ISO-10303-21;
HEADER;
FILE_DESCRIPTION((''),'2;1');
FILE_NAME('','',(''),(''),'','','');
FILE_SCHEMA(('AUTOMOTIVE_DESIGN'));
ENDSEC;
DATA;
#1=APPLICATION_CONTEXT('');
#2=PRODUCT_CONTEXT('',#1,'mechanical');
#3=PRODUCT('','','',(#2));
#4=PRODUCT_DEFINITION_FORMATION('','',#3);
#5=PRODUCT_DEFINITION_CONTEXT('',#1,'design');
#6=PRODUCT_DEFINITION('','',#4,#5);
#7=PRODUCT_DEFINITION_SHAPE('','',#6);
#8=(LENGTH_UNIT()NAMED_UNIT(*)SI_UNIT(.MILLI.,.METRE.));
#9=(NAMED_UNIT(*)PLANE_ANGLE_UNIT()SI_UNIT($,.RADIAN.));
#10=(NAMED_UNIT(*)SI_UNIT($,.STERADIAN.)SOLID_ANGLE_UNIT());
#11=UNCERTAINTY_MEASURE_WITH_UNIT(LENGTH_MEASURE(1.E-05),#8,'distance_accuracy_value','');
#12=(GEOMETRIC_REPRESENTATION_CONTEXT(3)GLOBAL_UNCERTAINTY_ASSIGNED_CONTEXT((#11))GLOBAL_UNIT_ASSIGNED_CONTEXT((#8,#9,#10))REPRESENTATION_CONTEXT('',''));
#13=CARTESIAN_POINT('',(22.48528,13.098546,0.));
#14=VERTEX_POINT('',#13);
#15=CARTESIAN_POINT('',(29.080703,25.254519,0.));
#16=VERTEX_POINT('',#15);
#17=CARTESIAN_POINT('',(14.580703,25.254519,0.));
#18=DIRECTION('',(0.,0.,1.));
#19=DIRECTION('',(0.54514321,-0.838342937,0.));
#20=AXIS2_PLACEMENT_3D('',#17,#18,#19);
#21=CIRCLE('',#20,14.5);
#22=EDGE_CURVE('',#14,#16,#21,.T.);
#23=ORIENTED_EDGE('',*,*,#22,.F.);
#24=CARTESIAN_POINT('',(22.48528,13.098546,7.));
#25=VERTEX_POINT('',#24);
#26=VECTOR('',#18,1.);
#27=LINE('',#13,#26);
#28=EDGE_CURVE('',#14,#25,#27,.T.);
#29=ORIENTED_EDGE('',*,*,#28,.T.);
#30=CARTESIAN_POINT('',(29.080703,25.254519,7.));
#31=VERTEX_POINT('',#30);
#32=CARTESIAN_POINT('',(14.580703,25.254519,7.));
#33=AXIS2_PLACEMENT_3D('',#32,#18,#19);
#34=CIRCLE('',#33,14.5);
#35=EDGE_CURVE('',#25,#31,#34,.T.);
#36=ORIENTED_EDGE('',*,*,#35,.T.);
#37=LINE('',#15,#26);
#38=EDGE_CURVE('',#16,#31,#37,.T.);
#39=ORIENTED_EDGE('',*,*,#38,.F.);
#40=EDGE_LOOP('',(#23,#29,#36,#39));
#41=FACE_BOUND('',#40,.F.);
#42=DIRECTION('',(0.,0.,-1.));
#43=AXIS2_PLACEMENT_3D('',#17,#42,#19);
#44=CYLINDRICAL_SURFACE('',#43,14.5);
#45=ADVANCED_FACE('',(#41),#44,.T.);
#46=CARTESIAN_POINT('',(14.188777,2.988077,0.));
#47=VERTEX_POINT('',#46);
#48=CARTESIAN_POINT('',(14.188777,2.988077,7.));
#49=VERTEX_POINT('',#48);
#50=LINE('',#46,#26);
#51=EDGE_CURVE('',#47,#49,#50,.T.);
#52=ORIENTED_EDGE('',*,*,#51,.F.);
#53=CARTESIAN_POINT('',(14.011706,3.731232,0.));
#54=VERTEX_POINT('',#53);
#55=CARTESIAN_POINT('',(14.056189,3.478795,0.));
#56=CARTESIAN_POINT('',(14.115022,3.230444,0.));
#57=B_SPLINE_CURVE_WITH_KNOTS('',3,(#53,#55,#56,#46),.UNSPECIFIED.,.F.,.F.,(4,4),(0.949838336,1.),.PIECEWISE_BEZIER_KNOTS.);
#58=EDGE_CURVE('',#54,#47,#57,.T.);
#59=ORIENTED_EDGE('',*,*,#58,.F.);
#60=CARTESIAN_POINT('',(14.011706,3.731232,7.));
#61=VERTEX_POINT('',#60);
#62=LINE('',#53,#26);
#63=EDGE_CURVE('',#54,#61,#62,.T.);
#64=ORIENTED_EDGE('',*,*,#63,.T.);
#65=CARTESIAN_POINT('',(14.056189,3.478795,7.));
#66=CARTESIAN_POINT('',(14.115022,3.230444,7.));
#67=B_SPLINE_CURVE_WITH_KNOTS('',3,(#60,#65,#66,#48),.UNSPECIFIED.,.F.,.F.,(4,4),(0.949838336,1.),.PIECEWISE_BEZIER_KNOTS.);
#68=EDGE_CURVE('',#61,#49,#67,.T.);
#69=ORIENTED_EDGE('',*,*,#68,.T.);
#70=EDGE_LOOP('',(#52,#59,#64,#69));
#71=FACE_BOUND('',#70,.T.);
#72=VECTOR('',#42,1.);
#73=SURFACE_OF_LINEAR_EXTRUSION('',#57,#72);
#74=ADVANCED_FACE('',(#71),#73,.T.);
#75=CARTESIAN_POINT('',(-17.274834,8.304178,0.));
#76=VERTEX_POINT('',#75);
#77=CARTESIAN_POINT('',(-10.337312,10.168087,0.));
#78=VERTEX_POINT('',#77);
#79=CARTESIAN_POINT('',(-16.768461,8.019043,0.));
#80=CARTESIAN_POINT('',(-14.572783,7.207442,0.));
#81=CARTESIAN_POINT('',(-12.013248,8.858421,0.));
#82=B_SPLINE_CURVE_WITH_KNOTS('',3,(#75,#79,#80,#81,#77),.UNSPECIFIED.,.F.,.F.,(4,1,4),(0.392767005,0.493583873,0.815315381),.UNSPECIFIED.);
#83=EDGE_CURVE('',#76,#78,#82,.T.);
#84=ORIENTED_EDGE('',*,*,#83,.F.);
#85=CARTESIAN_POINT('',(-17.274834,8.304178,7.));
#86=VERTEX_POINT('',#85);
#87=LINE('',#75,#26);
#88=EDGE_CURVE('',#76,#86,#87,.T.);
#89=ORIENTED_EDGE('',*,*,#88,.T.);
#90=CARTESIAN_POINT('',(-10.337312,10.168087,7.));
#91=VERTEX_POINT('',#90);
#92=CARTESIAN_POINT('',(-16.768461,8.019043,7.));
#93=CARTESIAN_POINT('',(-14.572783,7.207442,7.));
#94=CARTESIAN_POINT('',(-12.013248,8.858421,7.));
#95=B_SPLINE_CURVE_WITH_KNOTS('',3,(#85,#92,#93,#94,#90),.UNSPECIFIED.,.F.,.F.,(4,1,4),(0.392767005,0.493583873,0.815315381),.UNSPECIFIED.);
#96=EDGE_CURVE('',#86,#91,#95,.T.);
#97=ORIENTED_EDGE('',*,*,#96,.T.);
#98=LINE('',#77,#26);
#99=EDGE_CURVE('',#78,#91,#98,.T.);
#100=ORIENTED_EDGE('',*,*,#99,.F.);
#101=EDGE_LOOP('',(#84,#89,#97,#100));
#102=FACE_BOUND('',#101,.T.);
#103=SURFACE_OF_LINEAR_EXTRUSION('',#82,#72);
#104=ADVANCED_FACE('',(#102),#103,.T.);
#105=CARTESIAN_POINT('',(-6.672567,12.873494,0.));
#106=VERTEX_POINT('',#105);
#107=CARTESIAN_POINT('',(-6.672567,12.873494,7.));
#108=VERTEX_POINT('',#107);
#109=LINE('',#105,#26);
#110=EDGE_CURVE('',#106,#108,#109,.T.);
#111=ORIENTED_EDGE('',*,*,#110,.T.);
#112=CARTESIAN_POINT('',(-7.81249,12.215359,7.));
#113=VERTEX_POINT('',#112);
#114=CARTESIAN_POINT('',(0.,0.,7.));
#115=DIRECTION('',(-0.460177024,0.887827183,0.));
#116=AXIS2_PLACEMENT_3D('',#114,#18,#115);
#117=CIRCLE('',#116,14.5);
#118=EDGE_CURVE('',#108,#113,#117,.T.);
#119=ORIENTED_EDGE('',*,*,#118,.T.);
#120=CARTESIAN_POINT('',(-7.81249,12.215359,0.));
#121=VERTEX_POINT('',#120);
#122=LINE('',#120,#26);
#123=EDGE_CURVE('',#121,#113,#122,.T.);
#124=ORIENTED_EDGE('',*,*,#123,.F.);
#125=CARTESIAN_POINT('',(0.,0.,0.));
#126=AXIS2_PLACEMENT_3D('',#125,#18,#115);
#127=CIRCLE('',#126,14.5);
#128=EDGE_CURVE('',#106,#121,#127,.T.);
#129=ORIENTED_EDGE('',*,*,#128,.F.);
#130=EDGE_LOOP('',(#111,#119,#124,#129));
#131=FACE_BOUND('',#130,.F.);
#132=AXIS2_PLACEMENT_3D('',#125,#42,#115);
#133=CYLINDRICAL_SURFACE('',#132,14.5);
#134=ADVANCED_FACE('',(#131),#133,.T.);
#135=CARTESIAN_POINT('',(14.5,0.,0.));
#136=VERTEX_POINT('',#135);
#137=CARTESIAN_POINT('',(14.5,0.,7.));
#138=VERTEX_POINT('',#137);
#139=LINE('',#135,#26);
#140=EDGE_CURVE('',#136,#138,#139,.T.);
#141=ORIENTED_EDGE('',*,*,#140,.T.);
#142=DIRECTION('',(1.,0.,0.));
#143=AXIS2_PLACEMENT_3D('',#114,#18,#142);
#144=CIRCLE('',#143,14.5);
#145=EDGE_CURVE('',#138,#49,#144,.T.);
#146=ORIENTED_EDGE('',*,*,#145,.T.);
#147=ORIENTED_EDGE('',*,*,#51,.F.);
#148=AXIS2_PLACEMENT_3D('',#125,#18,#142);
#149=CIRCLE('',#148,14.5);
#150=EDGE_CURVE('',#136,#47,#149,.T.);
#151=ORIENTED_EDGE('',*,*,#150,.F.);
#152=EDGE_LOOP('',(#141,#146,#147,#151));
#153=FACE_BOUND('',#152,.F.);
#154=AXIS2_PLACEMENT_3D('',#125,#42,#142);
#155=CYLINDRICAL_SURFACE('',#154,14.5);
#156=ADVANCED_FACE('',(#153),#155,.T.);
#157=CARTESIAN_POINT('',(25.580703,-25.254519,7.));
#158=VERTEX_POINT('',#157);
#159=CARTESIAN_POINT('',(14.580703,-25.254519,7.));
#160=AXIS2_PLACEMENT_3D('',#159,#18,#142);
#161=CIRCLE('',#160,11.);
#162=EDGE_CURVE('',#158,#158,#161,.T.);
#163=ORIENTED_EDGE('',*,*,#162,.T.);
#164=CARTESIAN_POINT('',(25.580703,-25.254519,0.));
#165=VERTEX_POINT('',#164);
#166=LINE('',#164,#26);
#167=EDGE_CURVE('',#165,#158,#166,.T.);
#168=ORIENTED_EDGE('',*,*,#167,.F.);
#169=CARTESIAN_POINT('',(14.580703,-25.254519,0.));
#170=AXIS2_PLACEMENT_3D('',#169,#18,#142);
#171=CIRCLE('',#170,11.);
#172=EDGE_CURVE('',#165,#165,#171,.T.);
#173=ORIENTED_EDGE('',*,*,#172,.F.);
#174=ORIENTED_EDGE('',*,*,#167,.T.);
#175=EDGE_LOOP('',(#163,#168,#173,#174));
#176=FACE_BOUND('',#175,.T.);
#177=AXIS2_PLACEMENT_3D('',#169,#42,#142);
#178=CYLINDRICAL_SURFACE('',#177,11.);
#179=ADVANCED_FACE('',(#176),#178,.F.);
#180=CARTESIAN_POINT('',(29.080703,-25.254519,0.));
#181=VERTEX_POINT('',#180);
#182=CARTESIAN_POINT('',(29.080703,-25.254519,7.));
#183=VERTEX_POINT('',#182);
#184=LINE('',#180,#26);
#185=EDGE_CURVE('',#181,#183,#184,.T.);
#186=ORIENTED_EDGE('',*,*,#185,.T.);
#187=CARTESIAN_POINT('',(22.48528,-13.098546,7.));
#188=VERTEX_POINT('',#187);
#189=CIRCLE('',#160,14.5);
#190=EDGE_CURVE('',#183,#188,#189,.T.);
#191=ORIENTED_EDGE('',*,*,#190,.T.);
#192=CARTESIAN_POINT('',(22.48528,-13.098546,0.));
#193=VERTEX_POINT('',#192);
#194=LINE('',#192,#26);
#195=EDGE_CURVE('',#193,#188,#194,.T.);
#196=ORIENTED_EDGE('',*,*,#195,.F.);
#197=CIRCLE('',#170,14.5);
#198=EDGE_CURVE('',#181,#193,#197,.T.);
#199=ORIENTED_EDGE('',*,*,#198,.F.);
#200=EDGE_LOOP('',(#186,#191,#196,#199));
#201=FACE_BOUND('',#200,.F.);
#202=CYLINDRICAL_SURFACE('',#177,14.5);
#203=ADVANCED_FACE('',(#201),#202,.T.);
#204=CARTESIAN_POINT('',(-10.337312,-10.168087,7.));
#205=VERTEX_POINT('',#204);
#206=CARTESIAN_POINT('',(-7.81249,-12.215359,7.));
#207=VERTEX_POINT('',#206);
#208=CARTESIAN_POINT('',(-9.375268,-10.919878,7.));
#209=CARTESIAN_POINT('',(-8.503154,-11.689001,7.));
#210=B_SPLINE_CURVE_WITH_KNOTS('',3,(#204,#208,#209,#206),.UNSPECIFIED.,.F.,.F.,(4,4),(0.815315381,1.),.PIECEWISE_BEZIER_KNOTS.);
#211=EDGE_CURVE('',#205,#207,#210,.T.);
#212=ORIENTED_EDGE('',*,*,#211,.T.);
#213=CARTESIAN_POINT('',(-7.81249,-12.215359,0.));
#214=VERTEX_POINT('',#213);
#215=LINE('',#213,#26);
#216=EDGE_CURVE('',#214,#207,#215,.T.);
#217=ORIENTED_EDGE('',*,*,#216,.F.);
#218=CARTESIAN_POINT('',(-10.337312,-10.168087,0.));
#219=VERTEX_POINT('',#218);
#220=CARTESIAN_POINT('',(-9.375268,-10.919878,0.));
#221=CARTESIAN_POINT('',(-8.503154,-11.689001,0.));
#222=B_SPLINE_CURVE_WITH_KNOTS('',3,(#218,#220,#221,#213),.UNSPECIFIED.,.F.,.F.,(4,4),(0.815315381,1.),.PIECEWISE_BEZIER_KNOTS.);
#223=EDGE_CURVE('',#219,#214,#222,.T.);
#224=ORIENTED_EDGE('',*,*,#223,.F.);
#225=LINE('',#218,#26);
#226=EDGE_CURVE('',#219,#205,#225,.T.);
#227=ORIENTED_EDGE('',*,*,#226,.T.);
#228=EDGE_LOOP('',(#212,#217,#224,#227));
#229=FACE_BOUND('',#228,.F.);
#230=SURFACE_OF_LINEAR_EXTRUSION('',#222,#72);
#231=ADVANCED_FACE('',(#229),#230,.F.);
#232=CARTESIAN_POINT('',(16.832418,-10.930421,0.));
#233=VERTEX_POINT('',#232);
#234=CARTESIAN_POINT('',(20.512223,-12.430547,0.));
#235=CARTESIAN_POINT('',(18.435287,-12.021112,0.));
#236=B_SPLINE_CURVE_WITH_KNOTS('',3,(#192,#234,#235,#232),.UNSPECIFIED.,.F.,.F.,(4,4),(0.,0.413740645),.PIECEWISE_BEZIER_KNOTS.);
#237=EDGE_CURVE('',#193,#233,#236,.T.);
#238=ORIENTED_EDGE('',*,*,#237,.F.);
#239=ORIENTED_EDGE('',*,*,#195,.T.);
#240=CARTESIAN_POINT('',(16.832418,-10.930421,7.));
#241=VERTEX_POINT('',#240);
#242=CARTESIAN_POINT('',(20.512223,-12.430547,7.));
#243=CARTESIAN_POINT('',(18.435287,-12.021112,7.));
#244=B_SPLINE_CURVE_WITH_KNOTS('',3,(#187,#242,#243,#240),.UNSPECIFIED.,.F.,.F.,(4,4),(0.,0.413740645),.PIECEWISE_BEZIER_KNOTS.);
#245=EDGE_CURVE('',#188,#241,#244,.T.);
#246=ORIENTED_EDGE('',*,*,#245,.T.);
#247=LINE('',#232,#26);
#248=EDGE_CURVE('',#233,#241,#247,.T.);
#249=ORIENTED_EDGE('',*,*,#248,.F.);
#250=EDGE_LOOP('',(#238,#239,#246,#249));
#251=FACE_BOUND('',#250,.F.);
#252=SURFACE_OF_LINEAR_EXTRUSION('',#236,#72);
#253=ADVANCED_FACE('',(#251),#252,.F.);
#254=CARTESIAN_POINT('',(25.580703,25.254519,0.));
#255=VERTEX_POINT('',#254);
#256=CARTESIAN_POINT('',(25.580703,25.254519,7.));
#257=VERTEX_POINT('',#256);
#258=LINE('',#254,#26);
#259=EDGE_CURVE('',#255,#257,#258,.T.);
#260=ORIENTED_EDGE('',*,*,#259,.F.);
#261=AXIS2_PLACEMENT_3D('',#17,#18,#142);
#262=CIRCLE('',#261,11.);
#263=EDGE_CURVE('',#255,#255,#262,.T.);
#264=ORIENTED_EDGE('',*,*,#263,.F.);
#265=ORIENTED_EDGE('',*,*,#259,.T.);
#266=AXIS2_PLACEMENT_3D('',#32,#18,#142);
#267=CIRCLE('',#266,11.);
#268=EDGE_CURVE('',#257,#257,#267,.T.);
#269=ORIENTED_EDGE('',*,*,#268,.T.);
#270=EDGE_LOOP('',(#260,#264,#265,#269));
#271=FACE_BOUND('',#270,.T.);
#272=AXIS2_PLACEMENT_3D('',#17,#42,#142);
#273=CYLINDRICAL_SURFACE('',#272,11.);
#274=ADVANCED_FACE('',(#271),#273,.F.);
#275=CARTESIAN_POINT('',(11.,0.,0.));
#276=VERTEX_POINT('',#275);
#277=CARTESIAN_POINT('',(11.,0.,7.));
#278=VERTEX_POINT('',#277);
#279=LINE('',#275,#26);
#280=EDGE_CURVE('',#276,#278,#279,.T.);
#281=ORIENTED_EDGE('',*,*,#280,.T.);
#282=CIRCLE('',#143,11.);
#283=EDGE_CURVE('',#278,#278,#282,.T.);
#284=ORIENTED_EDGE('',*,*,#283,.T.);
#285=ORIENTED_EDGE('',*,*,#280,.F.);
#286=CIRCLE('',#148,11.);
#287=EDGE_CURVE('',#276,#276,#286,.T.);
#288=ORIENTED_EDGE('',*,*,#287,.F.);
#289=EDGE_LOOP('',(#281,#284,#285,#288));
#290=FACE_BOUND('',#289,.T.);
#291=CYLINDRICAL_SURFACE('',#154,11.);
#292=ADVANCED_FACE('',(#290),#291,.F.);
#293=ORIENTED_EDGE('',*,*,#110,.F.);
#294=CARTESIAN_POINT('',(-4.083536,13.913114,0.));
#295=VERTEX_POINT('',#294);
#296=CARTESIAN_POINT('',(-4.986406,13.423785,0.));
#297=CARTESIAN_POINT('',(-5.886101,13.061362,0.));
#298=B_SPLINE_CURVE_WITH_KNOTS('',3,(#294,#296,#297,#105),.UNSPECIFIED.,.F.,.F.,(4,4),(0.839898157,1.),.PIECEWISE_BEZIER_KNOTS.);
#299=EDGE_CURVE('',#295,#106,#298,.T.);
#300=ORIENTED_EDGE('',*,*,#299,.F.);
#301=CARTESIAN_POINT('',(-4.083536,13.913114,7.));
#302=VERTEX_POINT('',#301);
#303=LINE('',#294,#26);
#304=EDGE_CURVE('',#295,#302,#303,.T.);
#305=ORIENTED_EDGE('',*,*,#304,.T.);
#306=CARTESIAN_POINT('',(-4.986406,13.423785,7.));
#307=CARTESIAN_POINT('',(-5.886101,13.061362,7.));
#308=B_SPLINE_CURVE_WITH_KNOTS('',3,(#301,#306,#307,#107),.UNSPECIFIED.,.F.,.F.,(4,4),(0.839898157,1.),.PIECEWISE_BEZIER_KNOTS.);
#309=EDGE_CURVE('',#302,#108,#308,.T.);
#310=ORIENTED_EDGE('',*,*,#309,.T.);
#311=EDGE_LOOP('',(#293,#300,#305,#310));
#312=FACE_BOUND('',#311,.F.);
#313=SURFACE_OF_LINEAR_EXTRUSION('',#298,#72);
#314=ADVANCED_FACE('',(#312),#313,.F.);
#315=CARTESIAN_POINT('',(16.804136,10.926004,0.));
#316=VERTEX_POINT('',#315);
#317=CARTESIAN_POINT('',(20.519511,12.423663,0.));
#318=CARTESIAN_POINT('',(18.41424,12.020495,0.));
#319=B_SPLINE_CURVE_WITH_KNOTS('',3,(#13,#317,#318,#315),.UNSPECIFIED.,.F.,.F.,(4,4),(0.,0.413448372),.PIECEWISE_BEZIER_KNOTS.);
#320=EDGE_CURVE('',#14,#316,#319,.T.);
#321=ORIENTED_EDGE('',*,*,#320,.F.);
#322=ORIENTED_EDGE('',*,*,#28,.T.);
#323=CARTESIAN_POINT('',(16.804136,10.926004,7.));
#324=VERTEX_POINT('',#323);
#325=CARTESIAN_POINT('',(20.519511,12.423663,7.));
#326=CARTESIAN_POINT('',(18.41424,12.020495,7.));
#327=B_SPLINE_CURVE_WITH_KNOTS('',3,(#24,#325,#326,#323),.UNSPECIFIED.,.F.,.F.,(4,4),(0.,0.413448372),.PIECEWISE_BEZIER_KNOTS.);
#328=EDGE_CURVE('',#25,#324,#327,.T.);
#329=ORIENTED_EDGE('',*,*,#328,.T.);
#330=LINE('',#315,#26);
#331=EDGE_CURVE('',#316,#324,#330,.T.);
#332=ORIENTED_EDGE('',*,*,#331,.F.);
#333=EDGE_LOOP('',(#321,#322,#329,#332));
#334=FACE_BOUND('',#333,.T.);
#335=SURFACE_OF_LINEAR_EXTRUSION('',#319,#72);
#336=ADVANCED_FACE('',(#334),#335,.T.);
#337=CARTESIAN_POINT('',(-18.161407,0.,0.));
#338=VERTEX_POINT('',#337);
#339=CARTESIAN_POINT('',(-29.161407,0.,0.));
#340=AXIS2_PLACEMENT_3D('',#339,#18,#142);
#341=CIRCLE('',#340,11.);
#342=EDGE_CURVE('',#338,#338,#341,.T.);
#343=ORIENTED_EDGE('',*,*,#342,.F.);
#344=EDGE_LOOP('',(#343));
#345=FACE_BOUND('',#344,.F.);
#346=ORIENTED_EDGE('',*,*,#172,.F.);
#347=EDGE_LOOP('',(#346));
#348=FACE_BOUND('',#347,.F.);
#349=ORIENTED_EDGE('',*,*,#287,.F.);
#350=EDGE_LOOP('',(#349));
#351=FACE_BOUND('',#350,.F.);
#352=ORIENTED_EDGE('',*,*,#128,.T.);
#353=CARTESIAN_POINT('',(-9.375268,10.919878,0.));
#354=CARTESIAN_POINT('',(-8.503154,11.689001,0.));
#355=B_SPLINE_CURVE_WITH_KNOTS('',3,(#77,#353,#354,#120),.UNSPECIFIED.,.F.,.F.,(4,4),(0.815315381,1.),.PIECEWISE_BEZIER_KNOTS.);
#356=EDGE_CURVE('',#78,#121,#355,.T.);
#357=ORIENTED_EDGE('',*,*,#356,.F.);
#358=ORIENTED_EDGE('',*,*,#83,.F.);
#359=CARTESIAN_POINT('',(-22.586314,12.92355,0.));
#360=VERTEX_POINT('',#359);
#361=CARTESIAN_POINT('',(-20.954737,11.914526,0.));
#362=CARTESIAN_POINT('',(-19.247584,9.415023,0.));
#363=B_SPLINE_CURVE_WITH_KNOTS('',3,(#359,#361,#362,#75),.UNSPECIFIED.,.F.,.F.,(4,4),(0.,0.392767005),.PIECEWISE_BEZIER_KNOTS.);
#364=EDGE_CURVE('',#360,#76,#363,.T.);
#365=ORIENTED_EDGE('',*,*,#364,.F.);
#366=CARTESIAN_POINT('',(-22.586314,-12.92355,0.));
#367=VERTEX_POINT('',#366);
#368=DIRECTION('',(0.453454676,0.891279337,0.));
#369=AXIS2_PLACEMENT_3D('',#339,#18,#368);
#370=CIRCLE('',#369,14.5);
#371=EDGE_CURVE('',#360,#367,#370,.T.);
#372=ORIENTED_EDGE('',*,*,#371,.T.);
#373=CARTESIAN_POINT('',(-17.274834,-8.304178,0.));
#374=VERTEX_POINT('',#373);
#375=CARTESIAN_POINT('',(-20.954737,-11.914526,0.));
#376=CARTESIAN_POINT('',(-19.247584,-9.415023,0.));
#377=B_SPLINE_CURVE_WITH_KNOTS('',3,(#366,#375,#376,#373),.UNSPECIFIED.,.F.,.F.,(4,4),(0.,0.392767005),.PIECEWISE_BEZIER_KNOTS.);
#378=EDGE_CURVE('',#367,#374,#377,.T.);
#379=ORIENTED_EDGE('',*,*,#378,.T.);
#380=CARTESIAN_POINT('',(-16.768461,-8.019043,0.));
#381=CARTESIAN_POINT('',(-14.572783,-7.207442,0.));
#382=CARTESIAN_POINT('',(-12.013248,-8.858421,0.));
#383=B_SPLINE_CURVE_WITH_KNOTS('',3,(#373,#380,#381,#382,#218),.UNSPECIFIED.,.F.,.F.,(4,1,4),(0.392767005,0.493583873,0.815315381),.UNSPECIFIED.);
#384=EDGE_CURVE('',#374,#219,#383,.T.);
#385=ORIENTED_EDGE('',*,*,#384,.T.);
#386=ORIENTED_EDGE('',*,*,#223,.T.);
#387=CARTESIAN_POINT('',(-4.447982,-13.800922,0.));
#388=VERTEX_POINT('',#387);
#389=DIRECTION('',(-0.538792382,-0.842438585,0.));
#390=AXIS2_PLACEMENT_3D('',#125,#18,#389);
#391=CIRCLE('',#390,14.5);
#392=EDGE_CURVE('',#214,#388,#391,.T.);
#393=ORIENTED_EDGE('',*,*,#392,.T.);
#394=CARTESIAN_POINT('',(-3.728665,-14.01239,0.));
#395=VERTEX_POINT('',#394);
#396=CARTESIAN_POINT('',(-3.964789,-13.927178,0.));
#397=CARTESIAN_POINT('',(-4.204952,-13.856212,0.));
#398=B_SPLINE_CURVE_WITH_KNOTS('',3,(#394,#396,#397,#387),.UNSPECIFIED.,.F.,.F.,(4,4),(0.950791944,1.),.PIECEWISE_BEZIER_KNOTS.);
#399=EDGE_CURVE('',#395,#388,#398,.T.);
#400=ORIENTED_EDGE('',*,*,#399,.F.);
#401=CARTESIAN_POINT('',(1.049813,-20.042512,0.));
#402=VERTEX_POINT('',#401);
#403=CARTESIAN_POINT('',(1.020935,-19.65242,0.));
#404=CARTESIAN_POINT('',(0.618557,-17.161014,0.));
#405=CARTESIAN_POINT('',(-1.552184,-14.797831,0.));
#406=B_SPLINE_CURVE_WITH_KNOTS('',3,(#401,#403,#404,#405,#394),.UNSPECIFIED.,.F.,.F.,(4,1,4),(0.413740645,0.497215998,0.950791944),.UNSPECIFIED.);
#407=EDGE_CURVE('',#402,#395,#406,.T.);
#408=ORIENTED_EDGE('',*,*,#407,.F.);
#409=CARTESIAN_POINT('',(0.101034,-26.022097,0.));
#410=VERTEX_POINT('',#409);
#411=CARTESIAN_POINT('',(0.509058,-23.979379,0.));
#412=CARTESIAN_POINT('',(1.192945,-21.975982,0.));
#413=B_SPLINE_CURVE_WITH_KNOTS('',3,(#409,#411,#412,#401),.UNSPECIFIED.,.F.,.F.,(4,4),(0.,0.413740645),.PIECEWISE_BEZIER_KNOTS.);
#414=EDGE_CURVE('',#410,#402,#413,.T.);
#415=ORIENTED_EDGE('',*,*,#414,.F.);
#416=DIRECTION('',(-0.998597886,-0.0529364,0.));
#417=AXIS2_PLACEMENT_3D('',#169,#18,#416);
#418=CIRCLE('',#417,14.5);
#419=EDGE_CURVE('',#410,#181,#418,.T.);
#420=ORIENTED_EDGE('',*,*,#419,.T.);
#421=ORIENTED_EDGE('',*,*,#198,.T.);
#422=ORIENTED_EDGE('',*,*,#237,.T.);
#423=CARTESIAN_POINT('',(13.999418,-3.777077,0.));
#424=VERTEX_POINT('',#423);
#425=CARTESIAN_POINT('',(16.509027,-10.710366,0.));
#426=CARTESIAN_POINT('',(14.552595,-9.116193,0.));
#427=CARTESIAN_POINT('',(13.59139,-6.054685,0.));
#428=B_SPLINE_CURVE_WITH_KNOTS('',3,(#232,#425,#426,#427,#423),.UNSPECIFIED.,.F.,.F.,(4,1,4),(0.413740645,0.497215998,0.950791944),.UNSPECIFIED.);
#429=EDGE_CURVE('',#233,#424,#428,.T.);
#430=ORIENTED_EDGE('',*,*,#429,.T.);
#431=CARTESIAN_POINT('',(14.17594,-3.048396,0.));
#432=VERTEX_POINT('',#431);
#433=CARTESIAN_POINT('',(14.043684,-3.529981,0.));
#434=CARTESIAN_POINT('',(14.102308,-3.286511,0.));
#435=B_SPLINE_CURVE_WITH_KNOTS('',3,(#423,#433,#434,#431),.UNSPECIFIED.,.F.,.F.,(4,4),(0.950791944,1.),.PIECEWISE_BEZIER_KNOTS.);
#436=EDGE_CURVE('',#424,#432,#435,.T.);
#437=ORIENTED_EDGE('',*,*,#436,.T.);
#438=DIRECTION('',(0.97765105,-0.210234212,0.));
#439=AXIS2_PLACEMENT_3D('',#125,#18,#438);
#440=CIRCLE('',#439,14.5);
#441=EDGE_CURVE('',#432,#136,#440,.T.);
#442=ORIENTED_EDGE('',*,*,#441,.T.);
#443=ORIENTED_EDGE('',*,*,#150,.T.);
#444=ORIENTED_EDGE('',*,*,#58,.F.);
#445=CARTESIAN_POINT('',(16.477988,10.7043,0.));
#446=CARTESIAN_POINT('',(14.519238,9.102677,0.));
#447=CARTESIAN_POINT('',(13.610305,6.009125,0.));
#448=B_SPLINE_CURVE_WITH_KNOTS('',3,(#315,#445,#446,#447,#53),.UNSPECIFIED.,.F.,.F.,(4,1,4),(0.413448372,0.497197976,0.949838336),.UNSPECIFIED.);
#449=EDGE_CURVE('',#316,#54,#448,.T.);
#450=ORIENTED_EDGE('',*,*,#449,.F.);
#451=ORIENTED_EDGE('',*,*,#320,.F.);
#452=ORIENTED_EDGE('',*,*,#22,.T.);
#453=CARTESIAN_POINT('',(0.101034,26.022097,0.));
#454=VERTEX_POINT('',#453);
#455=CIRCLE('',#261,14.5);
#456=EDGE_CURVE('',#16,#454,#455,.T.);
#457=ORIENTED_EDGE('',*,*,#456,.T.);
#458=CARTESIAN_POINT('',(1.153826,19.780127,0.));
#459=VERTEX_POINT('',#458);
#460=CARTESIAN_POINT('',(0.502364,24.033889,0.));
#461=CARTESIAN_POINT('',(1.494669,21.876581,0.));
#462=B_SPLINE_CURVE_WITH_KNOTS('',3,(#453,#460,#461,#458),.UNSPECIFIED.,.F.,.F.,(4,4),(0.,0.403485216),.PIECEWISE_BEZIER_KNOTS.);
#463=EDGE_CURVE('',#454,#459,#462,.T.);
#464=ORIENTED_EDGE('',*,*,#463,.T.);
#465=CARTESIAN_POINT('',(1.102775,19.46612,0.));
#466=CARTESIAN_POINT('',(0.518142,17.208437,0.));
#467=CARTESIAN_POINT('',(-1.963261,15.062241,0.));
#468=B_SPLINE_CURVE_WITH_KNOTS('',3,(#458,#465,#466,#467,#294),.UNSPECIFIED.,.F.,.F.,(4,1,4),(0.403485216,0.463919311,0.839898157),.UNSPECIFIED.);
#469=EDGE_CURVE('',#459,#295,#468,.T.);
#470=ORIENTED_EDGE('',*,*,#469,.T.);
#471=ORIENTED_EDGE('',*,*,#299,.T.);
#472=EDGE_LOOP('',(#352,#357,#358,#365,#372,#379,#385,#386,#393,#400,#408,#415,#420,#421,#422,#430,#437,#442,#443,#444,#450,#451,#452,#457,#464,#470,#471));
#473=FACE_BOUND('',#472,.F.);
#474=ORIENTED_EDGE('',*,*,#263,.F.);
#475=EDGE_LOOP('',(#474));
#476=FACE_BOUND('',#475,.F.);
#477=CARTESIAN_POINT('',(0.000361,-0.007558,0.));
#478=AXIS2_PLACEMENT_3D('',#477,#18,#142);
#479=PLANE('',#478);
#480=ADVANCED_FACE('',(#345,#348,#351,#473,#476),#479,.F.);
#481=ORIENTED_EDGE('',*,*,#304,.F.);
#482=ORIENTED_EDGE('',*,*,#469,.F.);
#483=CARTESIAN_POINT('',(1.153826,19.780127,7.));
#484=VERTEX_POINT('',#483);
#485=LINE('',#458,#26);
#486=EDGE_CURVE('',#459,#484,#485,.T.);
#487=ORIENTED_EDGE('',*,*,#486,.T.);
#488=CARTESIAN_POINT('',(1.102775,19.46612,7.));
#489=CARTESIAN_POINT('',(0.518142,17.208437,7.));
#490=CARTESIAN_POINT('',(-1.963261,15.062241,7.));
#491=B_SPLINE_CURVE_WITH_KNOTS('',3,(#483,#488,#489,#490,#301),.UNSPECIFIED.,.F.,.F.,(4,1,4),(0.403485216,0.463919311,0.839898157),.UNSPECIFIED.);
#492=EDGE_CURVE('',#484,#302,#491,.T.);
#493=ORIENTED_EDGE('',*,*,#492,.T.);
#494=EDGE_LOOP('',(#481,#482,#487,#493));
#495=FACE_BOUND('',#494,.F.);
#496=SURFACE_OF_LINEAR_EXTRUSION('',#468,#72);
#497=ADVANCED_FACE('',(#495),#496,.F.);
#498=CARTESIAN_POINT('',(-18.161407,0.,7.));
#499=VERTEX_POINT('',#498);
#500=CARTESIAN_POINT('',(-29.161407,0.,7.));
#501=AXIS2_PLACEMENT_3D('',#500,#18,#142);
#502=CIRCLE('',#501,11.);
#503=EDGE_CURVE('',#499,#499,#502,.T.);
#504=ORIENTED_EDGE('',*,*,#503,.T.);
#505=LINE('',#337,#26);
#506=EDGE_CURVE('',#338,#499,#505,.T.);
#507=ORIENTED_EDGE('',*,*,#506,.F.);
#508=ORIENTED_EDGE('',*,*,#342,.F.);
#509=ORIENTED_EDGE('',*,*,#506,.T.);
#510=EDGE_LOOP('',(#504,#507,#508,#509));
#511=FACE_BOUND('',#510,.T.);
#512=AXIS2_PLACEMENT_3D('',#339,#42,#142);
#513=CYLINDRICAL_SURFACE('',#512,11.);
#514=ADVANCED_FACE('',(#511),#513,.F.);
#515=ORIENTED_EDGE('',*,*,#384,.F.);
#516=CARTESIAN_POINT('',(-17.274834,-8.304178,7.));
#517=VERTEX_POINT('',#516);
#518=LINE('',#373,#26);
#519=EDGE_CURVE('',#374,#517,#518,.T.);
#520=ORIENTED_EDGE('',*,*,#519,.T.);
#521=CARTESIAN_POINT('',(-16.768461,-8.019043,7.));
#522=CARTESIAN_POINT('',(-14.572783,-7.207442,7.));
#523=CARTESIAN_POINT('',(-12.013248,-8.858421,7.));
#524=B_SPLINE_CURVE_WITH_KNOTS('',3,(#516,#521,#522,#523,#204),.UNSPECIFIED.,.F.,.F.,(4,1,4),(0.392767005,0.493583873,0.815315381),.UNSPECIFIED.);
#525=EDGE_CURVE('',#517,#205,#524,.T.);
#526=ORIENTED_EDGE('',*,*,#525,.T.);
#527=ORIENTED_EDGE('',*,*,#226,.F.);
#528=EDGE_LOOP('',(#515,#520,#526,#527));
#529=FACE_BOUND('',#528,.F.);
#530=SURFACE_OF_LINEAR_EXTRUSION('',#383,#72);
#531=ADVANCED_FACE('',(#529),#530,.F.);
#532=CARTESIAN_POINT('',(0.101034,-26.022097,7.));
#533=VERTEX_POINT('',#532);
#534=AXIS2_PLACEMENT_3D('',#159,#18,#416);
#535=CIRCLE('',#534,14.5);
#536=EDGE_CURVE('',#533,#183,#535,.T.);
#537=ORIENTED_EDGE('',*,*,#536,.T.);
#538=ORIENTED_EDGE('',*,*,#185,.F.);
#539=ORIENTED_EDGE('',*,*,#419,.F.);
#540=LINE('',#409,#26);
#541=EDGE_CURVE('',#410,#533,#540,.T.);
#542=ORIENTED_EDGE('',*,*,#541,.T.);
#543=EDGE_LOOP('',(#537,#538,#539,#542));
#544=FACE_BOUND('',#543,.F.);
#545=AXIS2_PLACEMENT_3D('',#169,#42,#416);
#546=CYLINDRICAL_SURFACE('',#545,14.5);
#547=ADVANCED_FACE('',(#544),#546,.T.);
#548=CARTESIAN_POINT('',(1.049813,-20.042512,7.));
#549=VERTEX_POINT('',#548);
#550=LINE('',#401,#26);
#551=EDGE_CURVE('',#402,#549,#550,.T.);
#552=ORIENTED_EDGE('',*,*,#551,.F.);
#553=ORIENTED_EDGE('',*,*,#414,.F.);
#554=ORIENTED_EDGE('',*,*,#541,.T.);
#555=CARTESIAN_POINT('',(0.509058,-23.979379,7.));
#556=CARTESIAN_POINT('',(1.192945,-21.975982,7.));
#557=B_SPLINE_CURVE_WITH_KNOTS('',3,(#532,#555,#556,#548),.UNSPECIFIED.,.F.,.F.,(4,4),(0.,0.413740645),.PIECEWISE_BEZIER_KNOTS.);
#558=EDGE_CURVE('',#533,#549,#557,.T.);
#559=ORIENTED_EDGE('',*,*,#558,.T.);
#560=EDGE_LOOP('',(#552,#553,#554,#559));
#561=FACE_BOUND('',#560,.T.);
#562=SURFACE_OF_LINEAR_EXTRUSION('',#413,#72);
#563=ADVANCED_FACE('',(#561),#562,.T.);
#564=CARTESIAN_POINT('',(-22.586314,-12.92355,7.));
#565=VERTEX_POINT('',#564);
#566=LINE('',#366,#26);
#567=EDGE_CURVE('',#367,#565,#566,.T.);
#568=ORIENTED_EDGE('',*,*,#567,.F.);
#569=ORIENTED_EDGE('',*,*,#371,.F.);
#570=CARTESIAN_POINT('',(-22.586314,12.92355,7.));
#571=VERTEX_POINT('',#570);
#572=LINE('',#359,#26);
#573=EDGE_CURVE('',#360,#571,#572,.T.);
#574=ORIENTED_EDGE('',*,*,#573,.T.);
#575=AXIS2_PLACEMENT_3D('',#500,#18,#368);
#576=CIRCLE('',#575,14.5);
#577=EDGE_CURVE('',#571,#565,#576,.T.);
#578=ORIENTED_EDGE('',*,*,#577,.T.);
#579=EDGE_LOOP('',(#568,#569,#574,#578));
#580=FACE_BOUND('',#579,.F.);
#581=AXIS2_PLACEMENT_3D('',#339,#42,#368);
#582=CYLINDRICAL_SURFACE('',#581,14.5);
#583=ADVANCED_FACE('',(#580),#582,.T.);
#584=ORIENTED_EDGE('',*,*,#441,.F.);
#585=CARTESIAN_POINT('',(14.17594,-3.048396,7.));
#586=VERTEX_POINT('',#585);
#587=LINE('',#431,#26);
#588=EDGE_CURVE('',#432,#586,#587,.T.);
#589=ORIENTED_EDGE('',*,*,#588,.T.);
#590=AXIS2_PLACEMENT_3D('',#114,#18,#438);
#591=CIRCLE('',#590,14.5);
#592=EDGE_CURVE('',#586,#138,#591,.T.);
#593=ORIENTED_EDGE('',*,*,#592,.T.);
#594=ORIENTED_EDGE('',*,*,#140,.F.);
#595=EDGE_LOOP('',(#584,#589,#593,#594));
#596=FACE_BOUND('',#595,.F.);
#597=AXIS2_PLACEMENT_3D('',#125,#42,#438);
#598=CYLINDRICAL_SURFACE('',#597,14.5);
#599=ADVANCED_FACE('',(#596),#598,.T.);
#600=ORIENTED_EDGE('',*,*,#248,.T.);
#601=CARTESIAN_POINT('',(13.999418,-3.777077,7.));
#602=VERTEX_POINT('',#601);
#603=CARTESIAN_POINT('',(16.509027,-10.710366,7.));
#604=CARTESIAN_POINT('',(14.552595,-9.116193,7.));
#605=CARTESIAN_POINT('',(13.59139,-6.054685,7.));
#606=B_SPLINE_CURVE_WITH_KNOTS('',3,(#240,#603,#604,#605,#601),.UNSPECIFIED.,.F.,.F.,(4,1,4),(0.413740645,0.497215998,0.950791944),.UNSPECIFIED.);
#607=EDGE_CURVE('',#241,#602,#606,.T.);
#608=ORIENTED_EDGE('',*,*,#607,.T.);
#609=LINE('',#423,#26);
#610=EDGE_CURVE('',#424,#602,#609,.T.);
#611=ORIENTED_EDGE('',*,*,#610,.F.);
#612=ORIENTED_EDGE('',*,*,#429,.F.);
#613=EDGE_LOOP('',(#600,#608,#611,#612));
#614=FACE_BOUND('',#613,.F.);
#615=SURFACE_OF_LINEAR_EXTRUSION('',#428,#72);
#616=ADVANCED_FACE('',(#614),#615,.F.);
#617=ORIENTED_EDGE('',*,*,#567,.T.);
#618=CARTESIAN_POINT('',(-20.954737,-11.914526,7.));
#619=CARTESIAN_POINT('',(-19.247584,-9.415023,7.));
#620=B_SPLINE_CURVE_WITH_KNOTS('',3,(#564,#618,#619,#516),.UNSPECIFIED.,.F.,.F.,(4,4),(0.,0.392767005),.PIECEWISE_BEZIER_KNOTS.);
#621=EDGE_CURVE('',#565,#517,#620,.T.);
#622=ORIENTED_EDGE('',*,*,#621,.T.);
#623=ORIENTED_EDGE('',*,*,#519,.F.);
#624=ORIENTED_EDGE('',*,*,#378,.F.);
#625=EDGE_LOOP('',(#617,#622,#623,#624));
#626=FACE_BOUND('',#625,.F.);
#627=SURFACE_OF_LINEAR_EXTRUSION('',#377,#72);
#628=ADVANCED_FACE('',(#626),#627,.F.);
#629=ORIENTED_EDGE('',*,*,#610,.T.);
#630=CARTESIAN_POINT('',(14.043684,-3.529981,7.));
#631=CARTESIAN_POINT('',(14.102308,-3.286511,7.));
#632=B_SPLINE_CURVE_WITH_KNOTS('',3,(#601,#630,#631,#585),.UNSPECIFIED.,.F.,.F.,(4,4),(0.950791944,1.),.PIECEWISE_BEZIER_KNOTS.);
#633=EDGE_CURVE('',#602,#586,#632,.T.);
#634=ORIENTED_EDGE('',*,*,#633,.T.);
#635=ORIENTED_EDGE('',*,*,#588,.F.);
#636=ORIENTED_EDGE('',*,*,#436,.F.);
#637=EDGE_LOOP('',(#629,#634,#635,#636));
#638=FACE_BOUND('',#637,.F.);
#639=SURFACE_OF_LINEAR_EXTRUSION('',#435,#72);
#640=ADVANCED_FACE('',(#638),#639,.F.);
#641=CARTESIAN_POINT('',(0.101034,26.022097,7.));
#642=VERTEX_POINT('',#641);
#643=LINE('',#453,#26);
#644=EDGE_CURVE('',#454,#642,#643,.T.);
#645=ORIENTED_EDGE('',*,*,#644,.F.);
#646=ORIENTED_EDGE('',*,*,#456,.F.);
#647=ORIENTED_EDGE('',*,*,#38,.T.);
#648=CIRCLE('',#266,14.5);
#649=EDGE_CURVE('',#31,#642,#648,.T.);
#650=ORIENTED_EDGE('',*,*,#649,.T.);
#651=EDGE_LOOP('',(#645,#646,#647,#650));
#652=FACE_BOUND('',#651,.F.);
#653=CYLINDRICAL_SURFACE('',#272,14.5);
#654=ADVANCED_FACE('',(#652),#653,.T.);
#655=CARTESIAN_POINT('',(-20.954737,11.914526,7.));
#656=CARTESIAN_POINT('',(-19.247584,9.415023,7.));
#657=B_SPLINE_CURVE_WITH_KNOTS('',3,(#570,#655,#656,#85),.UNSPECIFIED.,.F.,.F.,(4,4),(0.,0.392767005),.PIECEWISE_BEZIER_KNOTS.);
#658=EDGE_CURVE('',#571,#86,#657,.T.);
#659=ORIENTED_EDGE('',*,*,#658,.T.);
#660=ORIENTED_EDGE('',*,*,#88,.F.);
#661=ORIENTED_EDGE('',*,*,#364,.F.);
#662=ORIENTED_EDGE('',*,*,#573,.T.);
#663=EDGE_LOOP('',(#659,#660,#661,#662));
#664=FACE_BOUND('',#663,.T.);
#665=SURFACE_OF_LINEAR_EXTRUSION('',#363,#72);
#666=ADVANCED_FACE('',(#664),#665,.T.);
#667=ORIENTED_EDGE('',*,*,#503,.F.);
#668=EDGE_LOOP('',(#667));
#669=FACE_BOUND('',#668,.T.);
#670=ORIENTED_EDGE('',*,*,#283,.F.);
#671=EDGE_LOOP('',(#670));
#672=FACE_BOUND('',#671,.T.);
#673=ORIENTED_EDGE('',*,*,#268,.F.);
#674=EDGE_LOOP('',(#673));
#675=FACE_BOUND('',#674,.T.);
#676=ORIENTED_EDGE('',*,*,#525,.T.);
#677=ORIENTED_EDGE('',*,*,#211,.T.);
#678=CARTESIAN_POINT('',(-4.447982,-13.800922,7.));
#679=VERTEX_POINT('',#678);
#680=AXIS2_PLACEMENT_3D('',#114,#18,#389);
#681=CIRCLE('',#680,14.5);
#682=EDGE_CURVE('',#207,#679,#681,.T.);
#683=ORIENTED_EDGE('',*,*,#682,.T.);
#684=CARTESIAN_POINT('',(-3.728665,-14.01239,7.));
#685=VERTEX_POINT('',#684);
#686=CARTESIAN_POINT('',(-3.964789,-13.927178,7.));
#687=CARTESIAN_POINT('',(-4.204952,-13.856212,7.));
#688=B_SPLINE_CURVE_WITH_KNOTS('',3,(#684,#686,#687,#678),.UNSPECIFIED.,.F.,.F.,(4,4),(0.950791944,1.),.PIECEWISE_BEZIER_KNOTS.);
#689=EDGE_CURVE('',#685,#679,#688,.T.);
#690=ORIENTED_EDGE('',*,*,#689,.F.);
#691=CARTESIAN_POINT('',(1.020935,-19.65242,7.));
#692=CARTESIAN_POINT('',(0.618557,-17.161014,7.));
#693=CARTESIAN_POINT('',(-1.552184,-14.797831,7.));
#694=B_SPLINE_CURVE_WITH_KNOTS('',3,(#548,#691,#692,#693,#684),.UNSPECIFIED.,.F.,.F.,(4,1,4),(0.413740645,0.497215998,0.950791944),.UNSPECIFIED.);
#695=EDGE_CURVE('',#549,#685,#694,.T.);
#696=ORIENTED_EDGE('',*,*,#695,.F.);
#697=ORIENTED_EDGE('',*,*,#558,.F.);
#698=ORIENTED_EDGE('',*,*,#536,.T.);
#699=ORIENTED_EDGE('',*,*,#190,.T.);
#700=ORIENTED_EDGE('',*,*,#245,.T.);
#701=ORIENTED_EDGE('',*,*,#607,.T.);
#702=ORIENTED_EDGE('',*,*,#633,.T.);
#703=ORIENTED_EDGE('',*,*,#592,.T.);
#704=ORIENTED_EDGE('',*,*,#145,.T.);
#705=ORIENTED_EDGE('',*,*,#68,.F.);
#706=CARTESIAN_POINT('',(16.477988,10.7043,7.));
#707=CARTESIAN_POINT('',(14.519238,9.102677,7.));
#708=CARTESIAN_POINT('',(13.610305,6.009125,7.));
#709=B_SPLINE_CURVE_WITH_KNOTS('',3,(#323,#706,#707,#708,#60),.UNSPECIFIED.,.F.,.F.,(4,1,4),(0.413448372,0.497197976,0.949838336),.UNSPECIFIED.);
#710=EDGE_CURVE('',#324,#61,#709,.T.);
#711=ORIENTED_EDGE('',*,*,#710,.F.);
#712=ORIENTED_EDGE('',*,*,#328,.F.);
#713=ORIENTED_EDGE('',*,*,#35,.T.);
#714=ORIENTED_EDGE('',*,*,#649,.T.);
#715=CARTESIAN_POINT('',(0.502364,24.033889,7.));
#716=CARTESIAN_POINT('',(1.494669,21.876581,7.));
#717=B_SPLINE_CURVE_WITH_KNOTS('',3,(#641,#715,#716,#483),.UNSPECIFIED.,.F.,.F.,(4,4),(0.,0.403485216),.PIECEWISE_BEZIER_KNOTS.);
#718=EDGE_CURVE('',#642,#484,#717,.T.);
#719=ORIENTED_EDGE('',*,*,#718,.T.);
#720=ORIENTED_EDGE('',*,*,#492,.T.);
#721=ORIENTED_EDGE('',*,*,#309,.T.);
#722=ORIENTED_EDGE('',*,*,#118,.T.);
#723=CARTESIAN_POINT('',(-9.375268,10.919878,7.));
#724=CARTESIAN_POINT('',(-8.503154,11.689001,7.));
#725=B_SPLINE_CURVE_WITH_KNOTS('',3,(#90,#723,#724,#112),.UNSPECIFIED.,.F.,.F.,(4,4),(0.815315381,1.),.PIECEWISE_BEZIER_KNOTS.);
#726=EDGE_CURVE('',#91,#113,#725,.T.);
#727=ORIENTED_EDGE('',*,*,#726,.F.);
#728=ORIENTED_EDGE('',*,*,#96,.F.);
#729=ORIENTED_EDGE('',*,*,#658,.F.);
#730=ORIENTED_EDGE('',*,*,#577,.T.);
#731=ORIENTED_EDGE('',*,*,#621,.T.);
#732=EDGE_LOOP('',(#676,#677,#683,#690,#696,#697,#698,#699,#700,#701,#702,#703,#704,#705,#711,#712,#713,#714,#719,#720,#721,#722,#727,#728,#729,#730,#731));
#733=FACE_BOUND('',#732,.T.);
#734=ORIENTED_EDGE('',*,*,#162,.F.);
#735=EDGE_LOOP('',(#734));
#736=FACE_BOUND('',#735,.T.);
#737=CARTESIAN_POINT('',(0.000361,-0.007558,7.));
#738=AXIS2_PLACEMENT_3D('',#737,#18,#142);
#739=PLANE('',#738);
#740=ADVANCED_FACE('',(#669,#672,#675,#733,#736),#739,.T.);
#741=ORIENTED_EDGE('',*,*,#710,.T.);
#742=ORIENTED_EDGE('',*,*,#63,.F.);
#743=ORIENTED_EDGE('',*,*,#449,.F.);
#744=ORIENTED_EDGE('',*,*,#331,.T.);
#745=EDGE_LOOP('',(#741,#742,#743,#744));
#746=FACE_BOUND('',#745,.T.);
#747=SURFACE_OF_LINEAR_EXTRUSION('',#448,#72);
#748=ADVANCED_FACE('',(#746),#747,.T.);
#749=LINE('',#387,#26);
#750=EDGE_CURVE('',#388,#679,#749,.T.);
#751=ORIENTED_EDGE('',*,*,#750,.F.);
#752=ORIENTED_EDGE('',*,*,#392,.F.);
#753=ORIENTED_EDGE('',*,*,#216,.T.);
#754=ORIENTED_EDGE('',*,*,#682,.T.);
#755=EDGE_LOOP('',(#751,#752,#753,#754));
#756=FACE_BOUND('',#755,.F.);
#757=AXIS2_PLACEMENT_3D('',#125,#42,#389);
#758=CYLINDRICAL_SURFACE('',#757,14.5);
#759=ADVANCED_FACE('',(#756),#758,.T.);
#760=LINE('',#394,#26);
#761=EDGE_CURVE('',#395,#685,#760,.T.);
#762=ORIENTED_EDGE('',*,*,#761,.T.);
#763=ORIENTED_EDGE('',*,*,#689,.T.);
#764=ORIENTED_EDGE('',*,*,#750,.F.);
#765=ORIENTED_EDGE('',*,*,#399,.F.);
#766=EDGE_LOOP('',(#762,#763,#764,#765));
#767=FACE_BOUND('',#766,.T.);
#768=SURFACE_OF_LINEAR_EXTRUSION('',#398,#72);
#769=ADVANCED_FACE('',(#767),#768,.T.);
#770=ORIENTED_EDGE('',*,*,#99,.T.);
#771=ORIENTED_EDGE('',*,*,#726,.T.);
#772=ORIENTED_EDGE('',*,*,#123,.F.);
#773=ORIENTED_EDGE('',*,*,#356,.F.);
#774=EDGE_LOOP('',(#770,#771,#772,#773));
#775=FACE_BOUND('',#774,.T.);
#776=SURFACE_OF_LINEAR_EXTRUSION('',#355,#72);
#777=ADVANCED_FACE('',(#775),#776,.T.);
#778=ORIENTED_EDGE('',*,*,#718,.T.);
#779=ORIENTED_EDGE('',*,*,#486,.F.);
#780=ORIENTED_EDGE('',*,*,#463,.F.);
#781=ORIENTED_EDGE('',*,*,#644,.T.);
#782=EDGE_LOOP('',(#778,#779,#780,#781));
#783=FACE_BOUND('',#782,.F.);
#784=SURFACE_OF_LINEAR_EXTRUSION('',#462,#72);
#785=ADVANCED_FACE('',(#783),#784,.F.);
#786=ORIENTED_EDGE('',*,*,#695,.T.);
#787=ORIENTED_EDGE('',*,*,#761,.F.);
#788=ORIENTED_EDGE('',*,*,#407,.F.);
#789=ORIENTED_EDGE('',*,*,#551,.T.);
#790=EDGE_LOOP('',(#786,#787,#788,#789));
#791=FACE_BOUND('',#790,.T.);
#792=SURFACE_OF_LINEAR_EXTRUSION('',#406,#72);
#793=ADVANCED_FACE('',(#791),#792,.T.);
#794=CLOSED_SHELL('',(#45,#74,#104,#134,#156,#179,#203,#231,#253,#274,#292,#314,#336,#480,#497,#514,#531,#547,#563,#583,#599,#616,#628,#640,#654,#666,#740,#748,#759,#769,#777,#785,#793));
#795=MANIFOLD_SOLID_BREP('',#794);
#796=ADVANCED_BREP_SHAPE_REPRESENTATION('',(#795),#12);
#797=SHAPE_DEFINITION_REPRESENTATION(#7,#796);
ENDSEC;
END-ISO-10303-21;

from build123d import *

# Parameters (mm, degrees)
F0_R     = 11
F1_DEPTH = 7


with BuildPart() as f1:
    # F0 (on Top) → F1 (new body)
    with BuildSketch(Plane.XY):
        with BuildLine():
            ThreePointArc((14.1759402298, -3.0483960701), (14.4187574592, -1.5327861344), (14.5, 0))
            ThreePointArc((14.5, 0), (14.421984404, 1.5021204517), (14.188777124, 2.9880769278))
            add(Edge.make_bspline(
                [(14.0117061641, 3.7312317498), (14.0561894605, 3.4787953407), (14.1150221965, 3.2304441785), (14.188777124, 2.9880769278)],
                knots=[0.9498383363, 0.9498383363, 0.9498383363, 0.9498383363, 1, 1, 1, 1], degree=3))
            ThreePointArc((14.0117061641, 3.7312317498), (7.1105429941, 12.6368579295), (-4.0835358776, 13.9131137685))
            add(Edge.make_bspline(
                [(-4.0835358776, 13.9131137685), (-4.9864056262, 13.4237848609), (-5.8861011392, 13.0613615019), (-6.6725668518, 12.8734941492)],
                knots=[0.8398981571, 0.8398981571, 0.8398981571, 0.8398981571, 1, 1, 1, 1], degree=3))
            ThreePointArc((-6.6725668518, 12.8734941492), (-7.25, 12.5573683549), (-7.8124895427, 12.2153594767))
            add(Edge.make_bspline(
                [(-10.3373118209, 10.1680865613), (-9.3752684105, 10.9198780403), (-8.503153556, 11.689001034), (-7.8124895427, 12.2153594767)],
                knots=[0.8153153807, 0.8153153807, 0.8153153807, 0.8153153807, 1, 1, 1, 1], degree=3))
            ThreePointArc((-10.3373118209, 10.1680865613), (-14.5, 0), (-10.3373118209, -10.1680865613))
            add(Edge.make_bspline(
                [(-10.3373118209, -10.1680865613), (-9.3752684105, -10.9198780403), (-8.503153556, -11.689001034), (-7.8124895427, -12.2153594767)],
                knots=[0.8153153807, 0.8153153807, 0.8153153807, 0.8153153807, 1, 1, 1, 1], degree=3))
            ThreePointArc((-7.8124895427, -12.2153594767), (-6.1812855522, -13.1164670899), (-4.4479816774, -13.8009223966))
            add(Edge.make_bspline(
                [(-3.7286645674, -14.0123895373), (-3.9647890084, -13.9271776533), (-4.2049522049, -13.8562123362), (-4.4479816774, -13.8009223966)],
                knots=[0.9507919436, 0.9507919436, 0.9507919436, 0.9507919436, 1, 1, 1, 1], degree=3))
            ThreePointArc((-3.7286645674, -14.0123895373), (7.25, -12.5573683549), (13.9994175907, -3.7770765311))
            add(Edge.make_bspline(
                [(13.9994175907, -3.7770765311), (14.043684155, -3.5299808247), (14.1023079859, -3.2865107369), (14.1759402298, -3.0483960701)],
                knots=[0.9507919436, 0.9507919436, 0.9507919436, 0.9507919436, 1, 1, 1, 1], degree=3))
        make_face()
        Circle(F0_R, mode=Mode.SUBTRACT)
        with BuildLine():
            ThreePointArc((-4.0835358776, 13.9131137685), (7.1105429941, 12.6368579295), (14.0117061641, 3.7312317498))
            add(Edge.make_bspline(
                [(16.8041360144, 10.9260038108), (16.4779875659, 10.7042997166), (14.5192375285, 9.1026767142), (13.6103052967, 6.0091248438), (14.0117061641, 3.7312317498)],
                knots=[0.4134483725, 0.4134483725, 0.4134483725, 0.4134483725, 0.4971979755, 0.9498383363, 0.9498383363, 0.9498383363, 0.9498383363], degree=3))
            ThreePointArc((16.8041360144, 10.9260038108), (7.4408037917, 12.6342244362), (1.1538261794, 19.7801267949))
            add(Edge.make_bspline(
                [(1.1538261794, 19.7801267949), (1.1027747103, 19.4661195397), (0.518142053, 17.2084365704), (-1.9632609294, 15.0622405677), (-4.0835358776, 13.9131137685)],
                knots=[0.4034852163, 0.4034852163, 0.4034852163, 0.4034852163, 0.4639193106, 0.8398981571, 0.8398981571, 0.8398981571, 0.8398981571], degree=3))
        make_face()
        with BuildLine():
            add(Edge.make_bspline(
                [(16.8324180589, -10.9304210804), (16.5090270331, -10.7103658028), (14.5525951809, -9.1161932679), (13.5913899182, -6.0546846446), (13.9994175907, -3.7770765311)],
                knots=[0.4137406454, 0.4137406454, 0.4137406454, 0.4137406454, 0.4972159985, 0.9507919436, 0.9507919436, 0.9507919436, 0.9507919436], degree=3))
            ThreePointArc((13.9994175907, -3.7770765311), (7.25, -12.5573683549), (-3.7286645674, -14.0123895373))
            add(Edge.make_bspline(
                [(1.0498133002, -20.0425121863), (1.0209353525, -19.6524197039), (0.6185573654, -17.1610137516), (-1.552184245, -14.7978312642), (-3.7286645674, -14.0123895373)],
                knots=[0.4137406454, 0.4137406454, 0.4137406454, 0.4137406454, 0.4972159985, 0.9507919436, 0.9507919436, 0.9507919436, 0.9507919436], degree=3))
            ThreePointArc((1.0498133002, -20.0425121863), (7.3307033346, -12.6971506308), (16.8324180589, -10.9304210804))
        make_face()
        with BuildLine():
            ThreePointArc((1.1538261794, 19.7801267949), (7.4408037917, 12.6342244362), (16.8041360144, 10.9260038108))
            add(Edge.make_bspline(
                [(22.4852798786, 13.0985463935), (20.5195105726, 12.423663188), (18.4142397082, 12.0204949315), (16.8041360144, 10.9260038108)],
                knots=[0, 0, 0, 0, 0.4134483725, 0.4134483725, 0.4134483725, 0.4134483725], degree=3))
            ThreePointArc((22.4852798786, 13.0985463935), (27.3256309509, 18.3395482658), (29.0807033346, 25.2545189857))
            ThreePointArc((29.0807033346, 25.2545189857), (14.964626833, 39.7494354307), (0.1010339902, 26.0220967828))
            add(Edge.make_bspline(
                [(0.1010339902, 26.0220967828), (0.5023641828, 24.0338894608), (1.4946687664, 21.8765805705), (1.1538261794, 19.7801267949)],
                knots=[0, 0, 0, 0, 0.4034852163, 0.4034852163, 0.4034852163, 0.4034852163], degree=3))
        make_face()
        with Locations((14.5807033346, 25.2545189857)):
            Circle(F0_R, mode=Mode.SUBTRACT)
        with BuildLine():
            add(Edge.make_bspline(
                [(22.4852798786, -13.0985463935), (20.5122225081, -12.4305468552), (18.4352865313, -12.0211120353), (16.8324180589, -10.9304210804)],
                knots=[0, 0, 0, 0, 0.4137406454, 0.4137406454, 0.4137406454, 0.4137406454], degree=3))
            ThreePointArc((16.8324180589, -10.9304210804), (7.3307033346, -12.6971506308), (1.0498133002, -20.0425121863))
            add(Edge.make_bspline(
                [(0.1010339902, -26.0220967828), (0.5090581055, -23.9793792077), (1.1929451387, -21.9759824798), (1.0498133002, -20.0425121863)],
                knots=[0, 0, 0, 0, 0.4137406454, 0.4137406454, 0.4137406454, 0.4137406454], degree=3))
            ThreePointArc((0.1010339902, -26.0220967828), (14.964626833, -39.7494354307), (29.0807033346, -25.2545189857))
            ThreePointArc((29.0807033346, -25.2545189857), (27.3256309509, -18.3395482658), (22.4852798786, -13.0985463935))
        make_face()
        with Locations((14.5807033346, -25.2545189857)):
            Circle(F0_R, mode=Mode.SUBTRACT)
        with BuildLine():
            ThreePointArc((-10.3373118209, -10.1680865613), (-14.5, 0), (-10.3373118209, 10.1680865613))
            add(Edge.make_bspline(
                [(-17.2748335615, 8.3041784514), (-16.7684606801, 8.0190428188), (-14.5727828059, 7.2074422158), (-12.0132482268, 8.8584214299), (-10.3373118209, 10.1680865613)],
                knots=[0.3927670048, 0.3927670048, 0.3927670048, 0.3927670048, 0.4935838728, 0.8153153807, 0.8153153807, 0.8153153807, 0.8153153807], degree=3))
            ThreePointArc((-17.2748335615, 8.3041784514), (-15.3301863677, 4.3528548067), (-14.6614066693, 0))
            ThreePointArc((-14.6614066693, 0), (-15.3301863677, -4.3528548067), (-17.2748335615, -8.3041784514))
            add(Edge.make_bspline(
                [(-17.2748335615, -8.3041784514), (-16.7684606801, -8.0190428188), (-14.5727828059, -7.2074422158), (-12.0132482268, -8.8584214299), (-10.3373118209, -10.1680865613)],
                knots=[0.3927670048, 0.3927670048, 0.3927670048, 0.3927670048, 0.4935838728, 0.8153153807, 0.8153153807, 0.8153153807, 0.8153153807], degree=3))
        make_face()
        with BuildLine():
            ThreePointArc((-14.6614066693, 0), (-15.3301863677, 4.3528548067), (-17.2748335615, 8.3041784514))
            add(Edge.make_bspline(
                [(-22.5863138688, 12.9235503893), (-20.9547365723, 11.9145258046), (-19.2475843898, 9.4150230013), (-17.2748335615, 8.3041784514)],
                knots=[0, 0, 0, 0, 0.3927670048, 0.3927670048, 0.3927670048, 0.3927670048], degree=3))
            ThreePointArc((-22.5863138688, 12.9235503893), (-43.6614066693, 0), (-22.5863138688, -12.9235503893))
            add(Edge.make_bspline(
                [(-22.5863138688, -12.9235503893), (-20.9547365723, -11.9145258046), (-19.2475843898, -9.4150230013), (-17.2748335615, -8.3041784514)],
                knots=[0, 0, 0, 0, 0.3927670048, 0.3927670048, 0.3927670048, 0.3927670048], degree=3))
            ThreePointArc((-17.2748335615, -8.3041784514), (-15.3301863677, -4.3528548067), (-14.6614066693, 0))
        make_face()
        with Locations((-29.1614066693, 0)):
            Circle(F0_R, mode=Mode.SUBTRACT)
    extrude(amount=F1_DEPTH)


solid = f1.part
